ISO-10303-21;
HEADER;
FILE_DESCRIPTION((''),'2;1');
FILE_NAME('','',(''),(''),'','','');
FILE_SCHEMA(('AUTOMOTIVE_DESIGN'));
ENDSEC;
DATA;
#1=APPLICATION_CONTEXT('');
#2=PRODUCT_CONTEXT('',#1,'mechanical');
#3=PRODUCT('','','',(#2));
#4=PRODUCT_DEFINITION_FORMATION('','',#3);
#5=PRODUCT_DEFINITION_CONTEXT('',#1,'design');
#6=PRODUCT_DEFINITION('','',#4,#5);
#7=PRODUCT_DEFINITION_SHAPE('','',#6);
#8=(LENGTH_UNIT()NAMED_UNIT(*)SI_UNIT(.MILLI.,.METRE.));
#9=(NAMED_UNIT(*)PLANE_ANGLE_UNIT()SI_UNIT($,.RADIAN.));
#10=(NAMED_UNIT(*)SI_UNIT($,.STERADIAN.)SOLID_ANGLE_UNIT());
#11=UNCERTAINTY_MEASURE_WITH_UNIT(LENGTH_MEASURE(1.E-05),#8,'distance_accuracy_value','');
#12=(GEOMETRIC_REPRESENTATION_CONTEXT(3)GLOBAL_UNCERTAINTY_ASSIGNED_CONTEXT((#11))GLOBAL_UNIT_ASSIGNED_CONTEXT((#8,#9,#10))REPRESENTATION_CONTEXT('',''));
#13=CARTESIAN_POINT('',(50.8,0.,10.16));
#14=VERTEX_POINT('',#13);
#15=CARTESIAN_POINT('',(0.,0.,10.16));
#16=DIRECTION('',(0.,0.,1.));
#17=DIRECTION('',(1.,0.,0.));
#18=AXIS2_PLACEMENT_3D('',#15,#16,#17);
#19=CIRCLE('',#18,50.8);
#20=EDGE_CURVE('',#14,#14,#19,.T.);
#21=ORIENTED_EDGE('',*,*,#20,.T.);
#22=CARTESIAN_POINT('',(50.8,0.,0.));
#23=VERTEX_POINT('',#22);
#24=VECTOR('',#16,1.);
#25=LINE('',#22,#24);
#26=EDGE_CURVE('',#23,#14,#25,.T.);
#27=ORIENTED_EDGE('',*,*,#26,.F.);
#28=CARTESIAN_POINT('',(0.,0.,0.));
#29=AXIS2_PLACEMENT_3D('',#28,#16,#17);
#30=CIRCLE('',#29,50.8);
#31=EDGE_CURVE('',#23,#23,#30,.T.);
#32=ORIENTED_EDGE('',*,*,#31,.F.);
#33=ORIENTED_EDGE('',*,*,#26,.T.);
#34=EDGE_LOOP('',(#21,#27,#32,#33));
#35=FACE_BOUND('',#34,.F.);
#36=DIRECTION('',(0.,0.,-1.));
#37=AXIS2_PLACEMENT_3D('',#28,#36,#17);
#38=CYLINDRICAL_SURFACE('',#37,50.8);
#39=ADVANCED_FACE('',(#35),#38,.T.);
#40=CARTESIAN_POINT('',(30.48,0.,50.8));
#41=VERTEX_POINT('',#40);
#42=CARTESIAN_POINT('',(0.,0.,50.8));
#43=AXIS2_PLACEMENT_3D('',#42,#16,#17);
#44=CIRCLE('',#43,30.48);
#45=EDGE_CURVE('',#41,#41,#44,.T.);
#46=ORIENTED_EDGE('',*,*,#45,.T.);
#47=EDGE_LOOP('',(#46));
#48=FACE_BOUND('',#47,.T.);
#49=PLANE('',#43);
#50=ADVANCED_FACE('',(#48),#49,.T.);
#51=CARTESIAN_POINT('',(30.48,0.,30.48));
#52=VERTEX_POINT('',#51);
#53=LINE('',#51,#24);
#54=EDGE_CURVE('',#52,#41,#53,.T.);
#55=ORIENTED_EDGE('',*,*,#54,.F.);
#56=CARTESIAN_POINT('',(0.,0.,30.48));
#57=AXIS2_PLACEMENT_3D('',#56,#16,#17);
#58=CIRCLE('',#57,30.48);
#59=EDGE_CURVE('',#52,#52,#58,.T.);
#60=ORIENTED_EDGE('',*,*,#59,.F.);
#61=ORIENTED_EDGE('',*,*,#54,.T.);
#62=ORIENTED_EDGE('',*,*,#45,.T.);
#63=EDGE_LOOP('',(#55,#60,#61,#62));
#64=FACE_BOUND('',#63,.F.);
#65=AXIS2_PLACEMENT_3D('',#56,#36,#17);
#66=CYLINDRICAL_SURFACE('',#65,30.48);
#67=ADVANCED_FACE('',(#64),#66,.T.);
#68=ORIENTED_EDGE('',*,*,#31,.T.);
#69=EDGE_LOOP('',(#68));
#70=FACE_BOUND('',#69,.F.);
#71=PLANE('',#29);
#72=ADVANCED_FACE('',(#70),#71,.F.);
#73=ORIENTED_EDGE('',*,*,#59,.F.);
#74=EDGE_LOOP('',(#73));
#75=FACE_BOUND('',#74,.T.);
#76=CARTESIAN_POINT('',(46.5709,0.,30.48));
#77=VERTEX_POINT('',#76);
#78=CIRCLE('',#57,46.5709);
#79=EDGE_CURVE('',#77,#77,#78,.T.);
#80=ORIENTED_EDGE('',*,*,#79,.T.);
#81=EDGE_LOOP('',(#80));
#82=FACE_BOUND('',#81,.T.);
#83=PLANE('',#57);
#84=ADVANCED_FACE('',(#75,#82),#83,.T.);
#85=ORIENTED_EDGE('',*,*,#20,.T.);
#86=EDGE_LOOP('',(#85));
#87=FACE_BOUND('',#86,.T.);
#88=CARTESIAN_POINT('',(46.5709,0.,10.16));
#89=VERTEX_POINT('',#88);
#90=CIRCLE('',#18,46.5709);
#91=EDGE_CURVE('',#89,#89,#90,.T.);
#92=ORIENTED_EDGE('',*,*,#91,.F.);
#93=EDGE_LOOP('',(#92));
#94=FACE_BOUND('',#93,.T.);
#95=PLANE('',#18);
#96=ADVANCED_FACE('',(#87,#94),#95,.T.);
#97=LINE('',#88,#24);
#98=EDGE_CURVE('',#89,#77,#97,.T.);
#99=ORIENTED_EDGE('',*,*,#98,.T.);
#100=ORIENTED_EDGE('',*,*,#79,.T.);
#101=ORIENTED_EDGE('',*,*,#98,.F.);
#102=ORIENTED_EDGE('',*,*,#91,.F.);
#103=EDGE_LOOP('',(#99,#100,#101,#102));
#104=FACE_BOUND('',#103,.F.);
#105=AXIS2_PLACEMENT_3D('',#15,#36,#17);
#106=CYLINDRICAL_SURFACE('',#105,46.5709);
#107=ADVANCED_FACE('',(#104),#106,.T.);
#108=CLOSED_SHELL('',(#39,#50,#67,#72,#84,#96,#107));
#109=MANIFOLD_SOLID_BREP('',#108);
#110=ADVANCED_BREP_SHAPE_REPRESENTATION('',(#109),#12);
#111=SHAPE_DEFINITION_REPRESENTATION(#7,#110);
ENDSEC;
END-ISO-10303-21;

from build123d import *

# Parameters (mm, degrees)
F0_R     = 50.8
F1_DEPTH = 10.16
F2_R     = 46.5709
F3_DEPTH = 20.32
F4_R     = 30.48
F5_DEPTH = 20.32


# Not quite as in the source:
# - a feature names something its author has since deleted; it is built from what else it names


with BuildPart() as f1:
    # F0 (on Top) → F1 (new body)
    with BuildSketch(Plane.XY):
        Circle(F0_R)
    extrude(amount=F1_DEPTH)

    # F2 (on face) → F3 (join)
    with BuildSketch(Plane.XY.offset(10.16)):
        Circle(F2_R)
    extrude(amount=F3_DEPTH)

    # F4 (on face) → F5 (join)
    with BuildSketch(Plane.XY.offset(30.48)):
        Circle(F4_R)
    extrude(amount=F5_DEPTH)


solid = f1.part
